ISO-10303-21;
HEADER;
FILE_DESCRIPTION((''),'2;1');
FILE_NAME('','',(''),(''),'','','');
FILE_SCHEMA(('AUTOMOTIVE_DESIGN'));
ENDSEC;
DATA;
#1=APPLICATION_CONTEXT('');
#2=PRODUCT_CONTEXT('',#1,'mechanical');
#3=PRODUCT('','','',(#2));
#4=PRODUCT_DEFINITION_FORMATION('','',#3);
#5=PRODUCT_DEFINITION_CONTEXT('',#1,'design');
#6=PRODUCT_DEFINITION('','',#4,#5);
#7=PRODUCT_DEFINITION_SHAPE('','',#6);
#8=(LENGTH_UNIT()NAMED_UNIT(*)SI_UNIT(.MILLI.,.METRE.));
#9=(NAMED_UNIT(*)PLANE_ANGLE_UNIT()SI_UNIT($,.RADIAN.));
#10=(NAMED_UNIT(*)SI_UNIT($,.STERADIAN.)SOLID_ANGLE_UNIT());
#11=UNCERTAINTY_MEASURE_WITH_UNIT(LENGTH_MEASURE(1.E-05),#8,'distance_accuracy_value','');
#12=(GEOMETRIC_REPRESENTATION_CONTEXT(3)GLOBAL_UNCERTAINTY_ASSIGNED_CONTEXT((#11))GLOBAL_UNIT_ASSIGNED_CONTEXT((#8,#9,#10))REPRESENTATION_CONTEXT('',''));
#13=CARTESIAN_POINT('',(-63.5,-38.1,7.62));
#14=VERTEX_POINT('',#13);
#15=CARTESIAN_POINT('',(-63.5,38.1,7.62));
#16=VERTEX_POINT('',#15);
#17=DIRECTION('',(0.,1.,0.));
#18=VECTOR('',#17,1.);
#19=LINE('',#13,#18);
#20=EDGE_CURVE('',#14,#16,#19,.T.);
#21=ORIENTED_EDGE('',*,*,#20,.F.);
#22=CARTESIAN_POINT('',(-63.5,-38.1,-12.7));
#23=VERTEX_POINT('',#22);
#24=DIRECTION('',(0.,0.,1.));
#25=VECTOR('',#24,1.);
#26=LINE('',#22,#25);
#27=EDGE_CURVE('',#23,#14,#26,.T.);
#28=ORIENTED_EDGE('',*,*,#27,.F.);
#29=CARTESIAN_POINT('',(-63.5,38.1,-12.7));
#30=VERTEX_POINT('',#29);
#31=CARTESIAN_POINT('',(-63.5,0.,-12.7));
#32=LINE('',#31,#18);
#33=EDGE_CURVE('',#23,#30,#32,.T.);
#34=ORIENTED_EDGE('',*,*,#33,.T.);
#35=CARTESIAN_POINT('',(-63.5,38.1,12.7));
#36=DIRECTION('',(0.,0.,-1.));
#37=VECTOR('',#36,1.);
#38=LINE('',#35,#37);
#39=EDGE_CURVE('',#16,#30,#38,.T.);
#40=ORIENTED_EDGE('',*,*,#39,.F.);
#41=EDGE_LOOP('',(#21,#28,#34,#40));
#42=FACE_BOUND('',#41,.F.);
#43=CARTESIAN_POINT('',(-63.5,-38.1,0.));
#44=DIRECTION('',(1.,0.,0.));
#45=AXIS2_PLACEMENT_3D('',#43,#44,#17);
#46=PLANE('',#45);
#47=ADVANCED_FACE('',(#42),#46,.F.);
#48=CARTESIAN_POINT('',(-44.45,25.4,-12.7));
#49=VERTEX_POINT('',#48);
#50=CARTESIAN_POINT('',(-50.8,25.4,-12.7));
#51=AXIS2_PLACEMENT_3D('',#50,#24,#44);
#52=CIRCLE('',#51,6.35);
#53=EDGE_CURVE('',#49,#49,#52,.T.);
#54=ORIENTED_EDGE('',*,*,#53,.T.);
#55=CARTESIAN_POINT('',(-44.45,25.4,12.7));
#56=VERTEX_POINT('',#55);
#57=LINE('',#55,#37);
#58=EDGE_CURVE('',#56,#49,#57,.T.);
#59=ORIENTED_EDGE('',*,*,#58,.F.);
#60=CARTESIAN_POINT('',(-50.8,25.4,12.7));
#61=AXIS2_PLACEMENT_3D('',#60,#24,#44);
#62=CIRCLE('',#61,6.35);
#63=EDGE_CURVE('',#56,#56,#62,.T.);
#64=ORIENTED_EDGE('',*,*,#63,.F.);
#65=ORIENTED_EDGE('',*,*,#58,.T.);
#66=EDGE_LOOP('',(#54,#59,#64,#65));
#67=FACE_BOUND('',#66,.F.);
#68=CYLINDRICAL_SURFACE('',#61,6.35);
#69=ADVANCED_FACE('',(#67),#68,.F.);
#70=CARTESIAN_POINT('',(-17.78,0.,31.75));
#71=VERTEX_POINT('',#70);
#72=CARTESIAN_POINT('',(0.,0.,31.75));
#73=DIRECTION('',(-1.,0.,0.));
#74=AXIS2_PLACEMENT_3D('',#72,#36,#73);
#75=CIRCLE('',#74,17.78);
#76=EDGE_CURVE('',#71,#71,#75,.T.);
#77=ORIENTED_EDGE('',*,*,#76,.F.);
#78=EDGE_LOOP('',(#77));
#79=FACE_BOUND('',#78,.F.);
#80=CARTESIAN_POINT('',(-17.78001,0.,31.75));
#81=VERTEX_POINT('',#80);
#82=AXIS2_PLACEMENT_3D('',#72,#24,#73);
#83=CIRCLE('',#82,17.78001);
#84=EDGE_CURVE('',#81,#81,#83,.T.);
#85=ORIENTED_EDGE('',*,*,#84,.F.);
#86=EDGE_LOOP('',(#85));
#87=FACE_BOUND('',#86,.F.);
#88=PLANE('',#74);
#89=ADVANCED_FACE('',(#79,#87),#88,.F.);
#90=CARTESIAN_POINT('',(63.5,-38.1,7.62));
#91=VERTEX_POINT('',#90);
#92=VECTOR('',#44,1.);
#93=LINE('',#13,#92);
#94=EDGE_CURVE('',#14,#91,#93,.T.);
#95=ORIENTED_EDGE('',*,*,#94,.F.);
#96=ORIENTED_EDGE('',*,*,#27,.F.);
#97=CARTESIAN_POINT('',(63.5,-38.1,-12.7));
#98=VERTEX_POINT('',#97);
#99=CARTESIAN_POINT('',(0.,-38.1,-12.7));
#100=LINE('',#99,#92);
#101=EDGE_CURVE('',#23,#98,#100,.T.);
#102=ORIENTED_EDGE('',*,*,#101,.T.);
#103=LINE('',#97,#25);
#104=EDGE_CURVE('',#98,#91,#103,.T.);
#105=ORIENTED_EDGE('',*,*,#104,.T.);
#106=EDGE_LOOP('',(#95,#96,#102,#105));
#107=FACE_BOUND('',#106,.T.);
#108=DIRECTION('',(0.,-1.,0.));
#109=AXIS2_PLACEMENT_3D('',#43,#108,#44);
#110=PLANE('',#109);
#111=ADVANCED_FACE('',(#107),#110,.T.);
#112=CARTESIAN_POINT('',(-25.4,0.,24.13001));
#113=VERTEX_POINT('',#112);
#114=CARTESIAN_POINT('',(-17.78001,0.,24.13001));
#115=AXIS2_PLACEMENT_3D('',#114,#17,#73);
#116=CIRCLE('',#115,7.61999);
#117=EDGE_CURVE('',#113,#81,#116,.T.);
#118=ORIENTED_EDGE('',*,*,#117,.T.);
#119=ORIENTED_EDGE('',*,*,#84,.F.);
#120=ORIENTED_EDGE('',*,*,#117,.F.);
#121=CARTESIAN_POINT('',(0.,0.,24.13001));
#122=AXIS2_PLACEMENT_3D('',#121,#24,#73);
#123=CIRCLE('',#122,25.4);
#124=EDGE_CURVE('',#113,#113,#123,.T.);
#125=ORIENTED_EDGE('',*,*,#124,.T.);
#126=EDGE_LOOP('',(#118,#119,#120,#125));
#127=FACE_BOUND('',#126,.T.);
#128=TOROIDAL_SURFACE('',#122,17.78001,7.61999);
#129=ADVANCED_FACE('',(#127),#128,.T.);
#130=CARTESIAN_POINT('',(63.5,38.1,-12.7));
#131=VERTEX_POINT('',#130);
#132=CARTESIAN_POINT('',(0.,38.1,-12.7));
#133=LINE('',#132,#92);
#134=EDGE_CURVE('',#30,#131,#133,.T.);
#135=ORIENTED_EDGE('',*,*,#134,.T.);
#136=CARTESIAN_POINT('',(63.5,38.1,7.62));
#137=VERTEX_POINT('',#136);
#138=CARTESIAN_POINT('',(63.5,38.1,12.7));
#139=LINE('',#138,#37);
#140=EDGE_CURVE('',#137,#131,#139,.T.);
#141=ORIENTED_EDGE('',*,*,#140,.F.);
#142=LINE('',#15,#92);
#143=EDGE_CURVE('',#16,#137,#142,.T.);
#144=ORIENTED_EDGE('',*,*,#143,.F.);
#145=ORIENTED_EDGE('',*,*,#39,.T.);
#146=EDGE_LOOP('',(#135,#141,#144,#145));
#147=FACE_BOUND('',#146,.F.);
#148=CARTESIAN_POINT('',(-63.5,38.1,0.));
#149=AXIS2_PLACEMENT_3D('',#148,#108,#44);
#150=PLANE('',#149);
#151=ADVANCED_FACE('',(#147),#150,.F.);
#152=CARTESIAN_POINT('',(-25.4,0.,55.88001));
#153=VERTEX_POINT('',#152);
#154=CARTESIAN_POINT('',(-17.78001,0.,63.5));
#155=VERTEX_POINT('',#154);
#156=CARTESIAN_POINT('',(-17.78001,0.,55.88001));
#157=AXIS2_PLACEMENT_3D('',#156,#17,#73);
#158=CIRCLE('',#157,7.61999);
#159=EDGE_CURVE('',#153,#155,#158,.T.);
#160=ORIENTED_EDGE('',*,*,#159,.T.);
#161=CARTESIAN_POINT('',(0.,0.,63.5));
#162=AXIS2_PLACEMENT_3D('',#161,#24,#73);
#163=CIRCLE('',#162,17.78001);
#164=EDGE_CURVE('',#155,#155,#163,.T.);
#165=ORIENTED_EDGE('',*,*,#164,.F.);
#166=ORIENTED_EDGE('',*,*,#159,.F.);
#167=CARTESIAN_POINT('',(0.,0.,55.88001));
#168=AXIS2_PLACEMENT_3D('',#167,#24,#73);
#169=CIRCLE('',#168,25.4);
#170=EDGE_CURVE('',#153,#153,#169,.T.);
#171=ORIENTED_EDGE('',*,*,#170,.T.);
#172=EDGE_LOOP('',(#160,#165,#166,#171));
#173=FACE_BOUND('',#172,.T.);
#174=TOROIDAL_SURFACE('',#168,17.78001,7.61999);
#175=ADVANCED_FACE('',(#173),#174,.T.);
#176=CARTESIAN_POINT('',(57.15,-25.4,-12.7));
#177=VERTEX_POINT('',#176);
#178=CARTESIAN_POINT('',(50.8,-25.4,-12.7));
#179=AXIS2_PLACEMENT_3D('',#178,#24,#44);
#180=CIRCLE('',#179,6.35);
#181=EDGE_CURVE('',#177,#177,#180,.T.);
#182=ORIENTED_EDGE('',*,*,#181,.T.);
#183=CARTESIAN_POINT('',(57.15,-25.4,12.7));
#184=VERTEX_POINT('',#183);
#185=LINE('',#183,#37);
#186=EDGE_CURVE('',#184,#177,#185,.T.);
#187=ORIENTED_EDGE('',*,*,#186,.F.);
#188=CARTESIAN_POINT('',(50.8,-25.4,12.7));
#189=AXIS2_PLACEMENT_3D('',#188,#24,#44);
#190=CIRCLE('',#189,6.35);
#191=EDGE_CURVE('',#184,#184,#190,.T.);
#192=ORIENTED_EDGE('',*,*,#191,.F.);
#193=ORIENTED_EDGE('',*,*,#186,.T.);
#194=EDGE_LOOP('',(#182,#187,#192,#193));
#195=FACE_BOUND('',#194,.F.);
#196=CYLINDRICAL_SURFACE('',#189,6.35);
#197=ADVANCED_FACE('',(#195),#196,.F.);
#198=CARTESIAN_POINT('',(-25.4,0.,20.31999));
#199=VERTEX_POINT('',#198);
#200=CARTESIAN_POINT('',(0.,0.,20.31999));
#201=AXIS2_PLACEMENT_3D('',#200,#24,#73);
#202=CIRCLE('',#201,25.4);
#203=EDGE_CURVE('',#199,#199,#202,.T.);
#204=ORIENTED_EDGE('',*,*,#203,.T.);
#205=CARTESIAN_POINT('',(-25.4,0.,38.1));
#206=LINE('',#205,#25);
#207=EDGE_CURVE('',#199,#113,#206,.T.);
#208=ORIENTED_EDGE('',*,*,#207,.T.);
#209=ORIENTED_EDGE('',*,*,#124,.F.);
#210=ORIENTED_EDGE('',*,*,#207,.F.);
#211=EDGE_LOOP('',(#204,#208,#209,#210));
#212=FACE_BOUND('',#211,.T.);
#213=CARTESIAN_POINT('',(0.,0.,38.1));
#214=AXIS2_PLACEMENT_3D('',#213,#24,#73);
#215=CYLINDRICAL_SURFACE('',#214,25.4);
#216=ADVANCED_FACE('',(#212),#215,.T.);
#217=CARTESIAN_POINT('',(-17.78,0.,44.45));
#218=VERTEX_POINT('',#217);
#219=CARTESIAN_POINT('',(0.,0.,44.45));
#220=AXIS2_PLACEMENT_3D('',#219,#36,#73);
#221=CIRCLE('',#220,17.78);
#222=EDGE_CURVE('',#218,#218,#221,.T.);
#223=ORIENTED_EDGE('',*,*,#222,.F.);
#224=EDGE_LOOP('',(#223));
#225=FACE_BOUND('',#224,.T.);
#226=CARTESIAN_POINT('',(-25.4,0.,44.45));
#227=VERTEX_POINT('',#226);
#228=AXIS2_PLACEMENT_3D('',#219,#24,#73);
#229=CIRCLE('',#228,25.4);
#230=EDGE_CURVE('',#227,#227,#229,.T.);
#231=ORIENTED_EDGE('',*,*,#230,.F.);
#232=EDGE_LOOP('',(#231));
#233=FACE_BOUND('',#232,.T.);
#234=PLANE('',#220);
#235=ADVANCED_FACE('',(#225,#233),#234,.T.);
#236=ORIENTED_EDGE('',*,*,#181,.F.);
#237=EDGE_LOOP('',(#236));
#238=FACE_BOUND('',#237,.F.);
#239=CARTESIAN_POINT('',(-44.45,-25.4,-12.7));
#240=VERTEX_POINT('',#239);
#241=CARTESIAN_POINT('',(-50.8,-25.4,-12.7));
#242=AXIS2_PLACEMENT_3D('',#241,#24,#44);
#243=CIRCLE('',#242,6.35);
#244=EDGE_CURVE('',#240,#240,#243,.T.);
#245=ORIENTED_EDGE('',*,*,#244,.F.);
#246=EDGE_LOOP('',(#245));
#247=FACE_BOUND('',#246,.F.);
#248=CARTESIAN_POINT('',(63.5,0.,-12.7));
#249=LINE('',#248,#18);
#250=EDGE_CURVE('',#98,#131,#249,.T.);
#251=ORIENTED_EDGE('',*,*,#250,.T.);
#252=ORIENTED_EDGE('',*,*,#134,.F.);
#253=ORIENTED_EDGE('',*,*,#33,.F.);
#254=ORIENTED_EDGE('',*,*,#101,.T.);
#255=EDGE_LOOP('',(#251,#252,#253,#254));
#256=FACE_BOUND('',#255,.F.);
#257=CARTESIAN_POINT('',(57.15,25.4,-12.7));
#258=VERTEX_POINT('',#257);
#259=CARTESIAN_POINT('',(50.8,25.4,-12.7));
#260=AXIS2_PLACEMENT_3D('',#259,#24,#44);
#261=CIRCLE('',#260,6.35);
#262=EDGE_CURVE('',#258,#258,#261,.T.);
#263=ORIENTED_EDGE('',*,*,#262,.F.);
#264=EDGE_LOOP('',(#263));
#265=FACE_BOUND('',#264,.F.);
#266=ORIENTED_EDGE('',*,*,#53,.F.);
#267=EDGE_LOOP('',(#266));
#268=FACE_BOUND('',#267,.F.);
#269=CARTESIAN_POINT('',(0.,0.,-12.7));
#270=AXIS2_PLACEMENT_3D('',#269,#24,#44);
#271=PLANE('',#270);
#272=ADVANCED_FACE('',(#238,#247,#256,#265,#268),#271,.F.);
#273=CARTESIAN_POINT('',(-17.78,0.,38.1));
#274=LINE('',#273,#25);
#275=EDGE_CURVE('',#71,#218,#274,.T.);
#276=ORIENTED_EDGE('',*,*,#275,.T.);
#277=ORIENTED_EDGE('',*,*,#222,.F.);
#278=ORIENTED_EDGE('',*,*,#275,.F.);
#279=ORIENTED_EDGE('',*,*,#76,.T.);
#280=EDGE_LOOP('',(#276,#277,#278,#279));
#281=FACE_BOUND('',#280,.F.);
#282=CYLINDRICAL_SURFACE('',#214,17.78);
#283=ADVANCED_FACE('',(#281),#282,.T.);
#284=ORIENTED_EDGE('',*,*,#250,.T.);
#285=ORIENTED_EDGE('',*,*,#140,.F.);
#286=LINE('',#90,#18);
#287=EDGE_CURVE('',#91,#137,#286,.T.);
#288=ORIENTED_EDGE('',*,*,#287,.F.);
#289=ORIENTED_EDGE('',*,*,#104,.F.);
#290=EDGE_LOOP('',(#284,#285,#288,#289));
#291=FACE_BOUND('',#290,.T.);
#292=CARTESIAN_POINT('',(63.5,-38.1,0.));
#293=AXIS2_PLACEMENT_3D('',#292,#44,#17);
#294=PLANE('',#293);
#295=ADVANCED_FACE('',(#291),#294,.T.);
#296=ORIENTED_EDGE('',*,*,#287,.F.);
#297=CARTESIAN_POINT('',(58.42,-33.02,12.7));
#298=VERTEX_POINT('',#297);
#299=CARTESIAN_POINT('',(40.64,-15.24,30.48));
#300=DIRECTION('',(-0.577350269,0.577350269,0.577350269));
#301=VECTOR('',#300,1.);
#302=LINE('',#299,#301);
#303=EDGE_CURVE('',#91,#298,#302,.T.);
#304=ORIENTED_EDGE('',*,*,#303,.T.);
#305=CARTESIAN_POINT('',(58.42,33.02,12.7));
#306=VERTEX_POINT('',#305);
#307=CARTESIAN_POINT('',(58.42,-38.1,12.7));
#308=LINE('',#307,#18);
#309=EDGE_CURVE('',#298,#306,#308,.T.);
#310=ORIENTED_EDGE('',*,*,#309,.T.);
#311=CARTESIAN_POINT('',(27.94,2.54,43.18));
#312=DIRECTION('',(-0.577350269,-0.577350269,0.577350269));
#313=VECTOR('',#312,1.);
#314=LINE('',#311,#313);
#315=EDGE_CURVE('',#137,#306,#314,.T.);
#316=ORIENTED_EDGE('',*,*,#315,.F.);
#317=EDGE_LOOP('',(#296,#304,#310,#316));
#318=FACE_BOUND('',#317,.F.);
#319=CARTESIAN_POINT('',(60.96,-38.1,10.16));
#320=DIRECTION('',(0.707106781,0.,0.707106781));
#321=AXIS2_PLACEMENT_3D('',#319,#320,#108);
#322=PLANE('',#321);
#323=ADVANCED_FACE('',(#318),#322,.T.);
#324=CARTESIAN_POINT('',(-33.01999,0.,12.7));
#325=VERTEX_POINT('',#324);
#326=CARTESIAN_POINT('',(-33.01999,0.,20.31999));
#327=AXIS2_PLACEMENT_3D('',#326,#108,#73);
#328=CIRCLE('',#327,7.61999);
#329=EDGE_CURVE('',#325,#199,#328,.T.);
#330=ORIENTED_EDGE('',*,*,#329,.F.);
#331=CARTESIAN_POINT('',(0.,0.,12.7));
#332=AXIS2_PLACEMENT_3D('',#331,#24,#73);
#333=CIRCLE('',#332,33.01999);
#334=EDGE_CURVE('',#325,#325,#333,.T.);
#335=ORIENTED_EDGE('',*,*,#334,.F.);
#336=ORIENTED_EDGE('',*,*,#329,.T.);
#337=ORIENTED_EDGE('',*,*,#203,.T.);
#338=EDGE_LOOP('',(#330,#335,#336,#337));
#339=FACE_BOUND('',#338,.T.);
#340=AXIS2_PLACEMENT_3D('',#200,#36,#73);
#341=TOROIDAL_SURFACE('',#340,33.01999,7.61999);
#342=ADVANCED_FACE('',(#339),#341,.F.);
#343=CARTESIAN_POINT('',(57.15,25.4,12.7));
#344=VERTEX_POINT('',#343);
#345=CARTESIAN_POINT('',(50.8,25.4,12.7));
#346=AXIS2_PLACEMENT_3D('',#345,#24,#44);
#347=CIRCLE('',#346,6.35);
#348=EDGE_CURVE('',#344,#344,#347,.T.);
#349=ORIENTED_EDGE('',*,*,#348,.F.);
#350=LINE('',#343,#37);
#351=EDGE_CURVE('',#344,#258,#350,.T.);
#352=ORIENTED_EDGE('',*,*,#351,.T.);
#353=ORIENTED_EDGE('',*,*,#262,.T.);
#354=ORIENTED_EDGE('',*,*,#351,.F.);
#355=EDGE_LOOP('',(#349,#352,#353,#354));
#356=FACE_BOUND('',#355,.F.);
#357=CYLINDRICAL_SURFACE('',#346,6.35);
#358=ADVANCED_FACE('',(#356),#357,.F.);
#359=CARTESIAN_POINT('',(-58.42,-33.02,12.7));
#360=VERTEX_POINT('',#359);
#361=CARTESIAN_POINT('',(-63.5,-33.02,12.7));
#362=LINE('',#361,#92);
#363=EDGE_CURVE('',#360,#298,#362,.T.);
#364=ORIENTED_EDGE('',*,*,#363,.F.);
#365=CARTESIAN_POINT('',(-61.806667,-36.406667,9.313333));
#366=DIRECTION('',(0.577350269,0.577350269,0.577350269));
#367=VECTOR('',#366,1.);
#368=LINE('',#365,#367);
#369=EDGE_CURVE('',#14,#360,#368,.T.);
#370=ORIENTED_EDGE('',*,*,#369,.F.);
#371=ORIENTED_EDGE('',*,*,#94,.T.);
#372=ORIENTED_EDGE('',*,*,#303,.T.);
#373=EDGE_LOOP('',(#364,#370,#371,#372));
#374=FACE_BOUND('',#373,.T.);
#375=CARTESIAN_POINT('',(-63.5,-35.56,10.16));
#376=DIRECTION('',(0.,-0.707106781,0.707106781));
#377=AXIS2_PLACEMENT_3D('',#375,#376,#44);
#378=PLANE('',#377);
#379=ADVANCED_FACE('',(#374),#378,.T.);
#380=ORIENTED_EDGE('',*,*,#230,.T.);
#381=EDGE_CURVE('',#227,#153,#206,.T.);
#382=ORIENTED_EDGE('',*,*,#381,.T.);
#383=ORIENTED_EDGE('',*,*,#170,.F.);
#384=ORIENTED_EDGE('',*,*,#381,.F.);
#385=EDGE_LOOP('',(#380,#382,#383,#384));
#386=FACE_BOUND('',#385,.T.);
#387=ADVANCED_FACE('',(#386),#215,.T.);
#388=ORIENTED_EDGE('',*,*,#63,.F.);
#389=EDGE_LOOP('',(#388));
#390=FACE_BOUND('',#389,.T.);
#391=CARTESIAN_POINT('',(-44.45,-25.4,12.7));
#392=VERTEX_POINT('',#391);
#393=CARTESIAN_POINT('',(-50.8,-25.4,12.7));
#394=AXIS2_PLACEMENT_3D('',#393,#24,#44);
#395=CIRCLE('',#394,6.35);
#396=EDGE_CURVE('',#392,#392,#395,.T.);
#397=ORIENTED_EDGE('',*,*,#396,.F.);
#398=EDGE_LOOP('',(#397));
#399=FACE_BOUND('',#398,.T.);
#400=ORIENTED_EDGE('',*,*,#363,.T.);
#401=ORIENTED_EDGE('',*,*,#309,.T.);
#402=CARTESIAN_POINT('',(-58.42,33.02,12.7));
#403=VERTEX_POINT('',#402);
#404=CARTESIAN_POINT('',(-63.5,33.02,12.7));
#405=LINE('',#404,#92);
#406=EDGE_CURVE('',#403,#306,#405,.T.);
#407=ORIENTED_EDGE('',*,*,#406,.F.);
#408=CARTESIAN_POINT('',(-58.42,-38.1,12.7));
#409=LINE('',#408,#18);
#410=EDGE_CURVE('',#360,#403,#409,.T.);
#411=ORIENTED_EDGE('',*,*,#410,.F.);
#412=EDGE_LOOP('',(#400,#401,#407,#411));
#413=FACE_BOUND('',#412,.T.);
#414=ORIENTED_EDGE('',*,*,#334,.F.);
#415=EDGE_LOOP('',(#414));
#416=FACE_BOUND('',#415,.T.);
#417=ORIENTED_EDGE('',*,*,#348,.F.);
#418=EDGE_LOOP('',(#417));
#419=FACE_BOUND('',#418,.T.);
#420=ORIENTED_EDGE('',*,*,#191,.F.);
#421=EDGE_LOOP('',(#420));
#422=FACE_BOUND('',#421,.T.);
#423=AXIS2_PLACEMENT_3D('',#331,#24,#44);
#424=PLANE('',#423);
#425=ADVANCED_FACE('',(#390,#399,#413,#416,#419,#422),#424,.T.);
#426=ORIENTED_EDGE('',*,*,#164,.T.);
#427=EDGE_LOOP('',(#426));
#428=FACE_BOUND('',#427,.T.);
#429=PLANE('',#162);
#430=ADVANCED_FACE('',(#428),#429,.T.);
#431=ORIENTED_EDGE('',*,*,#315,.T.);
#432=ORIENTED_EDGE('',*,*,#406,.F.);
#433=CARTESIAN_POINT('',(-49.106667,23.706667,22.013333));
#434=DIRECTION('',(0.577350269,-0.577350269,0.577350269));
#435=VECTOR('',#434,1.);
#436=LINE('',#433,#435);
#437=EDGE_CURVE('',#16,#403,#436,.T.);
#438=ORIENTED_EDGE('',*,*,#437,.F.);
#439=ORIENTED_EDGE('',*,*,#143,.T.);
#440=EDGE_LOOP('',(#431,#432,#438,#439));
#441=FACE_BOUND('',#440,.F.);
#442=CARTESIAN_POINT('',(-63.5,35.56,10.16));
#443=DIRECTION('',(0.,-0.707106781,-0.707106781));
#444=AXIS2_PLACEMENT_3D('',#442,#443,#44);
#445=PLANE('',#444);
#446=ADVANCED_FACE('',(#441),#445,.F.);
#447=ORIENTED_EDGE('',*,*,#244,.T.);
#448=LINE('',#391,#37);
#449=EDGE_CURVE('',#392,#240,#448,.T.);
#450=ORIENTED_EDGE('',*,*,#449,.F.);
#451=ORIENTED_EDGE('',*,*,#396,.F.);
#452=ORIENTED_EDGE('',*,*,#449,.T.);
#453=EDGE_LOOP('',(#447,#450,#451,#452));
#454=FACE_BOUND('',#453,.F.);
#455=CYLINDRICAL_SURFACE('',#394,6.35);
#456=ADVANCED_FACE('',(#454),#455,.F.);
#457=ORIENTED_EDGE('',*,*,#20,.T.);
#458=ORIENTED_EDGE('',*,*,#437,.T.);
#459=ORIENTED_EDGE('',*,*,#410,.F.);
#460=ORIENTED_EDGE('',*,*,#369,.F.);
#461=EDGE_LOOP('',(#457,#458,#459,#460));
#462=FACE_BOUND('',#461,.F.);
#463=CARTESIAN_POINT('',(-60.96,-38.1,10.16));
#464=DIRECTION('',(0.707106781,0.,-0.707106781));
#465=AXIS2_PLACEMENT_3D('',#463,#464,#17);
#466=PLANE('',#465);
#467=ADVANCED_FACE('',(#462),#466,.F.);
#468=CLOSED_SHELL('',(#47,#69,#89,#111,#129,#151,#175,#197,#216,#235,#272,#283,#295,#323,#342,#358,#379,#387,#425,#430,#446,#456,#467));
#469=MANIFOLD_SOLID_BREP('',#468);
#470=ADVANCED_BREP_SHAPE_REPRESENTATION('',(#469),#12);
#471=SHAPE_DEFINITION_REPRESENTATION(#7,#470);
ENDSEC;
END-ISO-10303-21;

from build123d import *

# Parameters (mm, degrees)
F0_W     = 127
F0_H     = 76.2
F1_DEPTH = 12.7
F2_R     = 6.35
F3_DEPTH = 38.1
F4_W     = 25.4
F4_H     = 50.8
F6_W     = 16.0364900438
F6_H     = 12.7
F8_SIZE  = 5.08
F9_R     = 7.61999


# Not quite as in the source:
# - a fillet or chamfer is up to 0.001 mm smaller than in the source, because OpenCascade refuses the exact size


with BuildPart() as f1:
    # F0 (on Top) → F1 (new body, symmetric)
    with BuildSketch(Plane.XY):
        Rectangle(F0_W, F0_H)
    extrude(amount=F1_DEPTH, both=True)

    # F2 (on face) → F3 (cut)
    with BuildSketch(Plane.XY.offset(12.7)):
        with Locations((-50.8, 25.4)):
            Circle(F2_R)
        with Locations((50.8, 25.4)):
            Circle(F2_R)
        with Locations((50.8, -25.4)):
            Circle(F2_R)
        with Locations((-50.8, -25.4)):
            Circle(F2_R)
    extrude(amount=-F3_DEPTH, mode=Mode.SUBTRACT)

    # F4 (on Front) → F5 (revolve)
    with BuildSketch(Plane.XZ):
        with Locations((-12.7, 38.1)):
            Rectangle(F4_W, F4_H)
    revolve(axis=Axis((0, 0, 38.1), (0, 0, 1)))

    # F6 (on Front) → F7 (revolve, cut)
    with BuildSketch(Plane.XZ):
        with Locations((-25.7982450219, 38.1)):
            Rectangle(F6_W, F6_H)
    revolve(axis=Axis((0, 0, 63.5), (0, 0, -1)), mode=Mode.SUBTRACT)

    # F8
    f8_edges = [f1.edges().sort_by_distance(p)[0] for p in [
        (0, -38.1, 12.7),
        (-63.5, 0, 12.7),
        (0, 38.1, 12.7),
        (63.5, 0, 12.7),
    ]]
    chamfer(f8_edges, length=F8_SIZE)

    # F9 (radius 7.62 in the source; OpenCascade refuses exactly that, so slightly less here)
    f9_edges = [f1.edges().sort_by_distance(p)[0] for p in [
        (25.4, 0, 12.7),
        (25.4, 0, 31.75),
        (25.4, 0, 63.5),
    ]]
    fillet(f9_edges, radius=F9_R)


solid = f1.part
